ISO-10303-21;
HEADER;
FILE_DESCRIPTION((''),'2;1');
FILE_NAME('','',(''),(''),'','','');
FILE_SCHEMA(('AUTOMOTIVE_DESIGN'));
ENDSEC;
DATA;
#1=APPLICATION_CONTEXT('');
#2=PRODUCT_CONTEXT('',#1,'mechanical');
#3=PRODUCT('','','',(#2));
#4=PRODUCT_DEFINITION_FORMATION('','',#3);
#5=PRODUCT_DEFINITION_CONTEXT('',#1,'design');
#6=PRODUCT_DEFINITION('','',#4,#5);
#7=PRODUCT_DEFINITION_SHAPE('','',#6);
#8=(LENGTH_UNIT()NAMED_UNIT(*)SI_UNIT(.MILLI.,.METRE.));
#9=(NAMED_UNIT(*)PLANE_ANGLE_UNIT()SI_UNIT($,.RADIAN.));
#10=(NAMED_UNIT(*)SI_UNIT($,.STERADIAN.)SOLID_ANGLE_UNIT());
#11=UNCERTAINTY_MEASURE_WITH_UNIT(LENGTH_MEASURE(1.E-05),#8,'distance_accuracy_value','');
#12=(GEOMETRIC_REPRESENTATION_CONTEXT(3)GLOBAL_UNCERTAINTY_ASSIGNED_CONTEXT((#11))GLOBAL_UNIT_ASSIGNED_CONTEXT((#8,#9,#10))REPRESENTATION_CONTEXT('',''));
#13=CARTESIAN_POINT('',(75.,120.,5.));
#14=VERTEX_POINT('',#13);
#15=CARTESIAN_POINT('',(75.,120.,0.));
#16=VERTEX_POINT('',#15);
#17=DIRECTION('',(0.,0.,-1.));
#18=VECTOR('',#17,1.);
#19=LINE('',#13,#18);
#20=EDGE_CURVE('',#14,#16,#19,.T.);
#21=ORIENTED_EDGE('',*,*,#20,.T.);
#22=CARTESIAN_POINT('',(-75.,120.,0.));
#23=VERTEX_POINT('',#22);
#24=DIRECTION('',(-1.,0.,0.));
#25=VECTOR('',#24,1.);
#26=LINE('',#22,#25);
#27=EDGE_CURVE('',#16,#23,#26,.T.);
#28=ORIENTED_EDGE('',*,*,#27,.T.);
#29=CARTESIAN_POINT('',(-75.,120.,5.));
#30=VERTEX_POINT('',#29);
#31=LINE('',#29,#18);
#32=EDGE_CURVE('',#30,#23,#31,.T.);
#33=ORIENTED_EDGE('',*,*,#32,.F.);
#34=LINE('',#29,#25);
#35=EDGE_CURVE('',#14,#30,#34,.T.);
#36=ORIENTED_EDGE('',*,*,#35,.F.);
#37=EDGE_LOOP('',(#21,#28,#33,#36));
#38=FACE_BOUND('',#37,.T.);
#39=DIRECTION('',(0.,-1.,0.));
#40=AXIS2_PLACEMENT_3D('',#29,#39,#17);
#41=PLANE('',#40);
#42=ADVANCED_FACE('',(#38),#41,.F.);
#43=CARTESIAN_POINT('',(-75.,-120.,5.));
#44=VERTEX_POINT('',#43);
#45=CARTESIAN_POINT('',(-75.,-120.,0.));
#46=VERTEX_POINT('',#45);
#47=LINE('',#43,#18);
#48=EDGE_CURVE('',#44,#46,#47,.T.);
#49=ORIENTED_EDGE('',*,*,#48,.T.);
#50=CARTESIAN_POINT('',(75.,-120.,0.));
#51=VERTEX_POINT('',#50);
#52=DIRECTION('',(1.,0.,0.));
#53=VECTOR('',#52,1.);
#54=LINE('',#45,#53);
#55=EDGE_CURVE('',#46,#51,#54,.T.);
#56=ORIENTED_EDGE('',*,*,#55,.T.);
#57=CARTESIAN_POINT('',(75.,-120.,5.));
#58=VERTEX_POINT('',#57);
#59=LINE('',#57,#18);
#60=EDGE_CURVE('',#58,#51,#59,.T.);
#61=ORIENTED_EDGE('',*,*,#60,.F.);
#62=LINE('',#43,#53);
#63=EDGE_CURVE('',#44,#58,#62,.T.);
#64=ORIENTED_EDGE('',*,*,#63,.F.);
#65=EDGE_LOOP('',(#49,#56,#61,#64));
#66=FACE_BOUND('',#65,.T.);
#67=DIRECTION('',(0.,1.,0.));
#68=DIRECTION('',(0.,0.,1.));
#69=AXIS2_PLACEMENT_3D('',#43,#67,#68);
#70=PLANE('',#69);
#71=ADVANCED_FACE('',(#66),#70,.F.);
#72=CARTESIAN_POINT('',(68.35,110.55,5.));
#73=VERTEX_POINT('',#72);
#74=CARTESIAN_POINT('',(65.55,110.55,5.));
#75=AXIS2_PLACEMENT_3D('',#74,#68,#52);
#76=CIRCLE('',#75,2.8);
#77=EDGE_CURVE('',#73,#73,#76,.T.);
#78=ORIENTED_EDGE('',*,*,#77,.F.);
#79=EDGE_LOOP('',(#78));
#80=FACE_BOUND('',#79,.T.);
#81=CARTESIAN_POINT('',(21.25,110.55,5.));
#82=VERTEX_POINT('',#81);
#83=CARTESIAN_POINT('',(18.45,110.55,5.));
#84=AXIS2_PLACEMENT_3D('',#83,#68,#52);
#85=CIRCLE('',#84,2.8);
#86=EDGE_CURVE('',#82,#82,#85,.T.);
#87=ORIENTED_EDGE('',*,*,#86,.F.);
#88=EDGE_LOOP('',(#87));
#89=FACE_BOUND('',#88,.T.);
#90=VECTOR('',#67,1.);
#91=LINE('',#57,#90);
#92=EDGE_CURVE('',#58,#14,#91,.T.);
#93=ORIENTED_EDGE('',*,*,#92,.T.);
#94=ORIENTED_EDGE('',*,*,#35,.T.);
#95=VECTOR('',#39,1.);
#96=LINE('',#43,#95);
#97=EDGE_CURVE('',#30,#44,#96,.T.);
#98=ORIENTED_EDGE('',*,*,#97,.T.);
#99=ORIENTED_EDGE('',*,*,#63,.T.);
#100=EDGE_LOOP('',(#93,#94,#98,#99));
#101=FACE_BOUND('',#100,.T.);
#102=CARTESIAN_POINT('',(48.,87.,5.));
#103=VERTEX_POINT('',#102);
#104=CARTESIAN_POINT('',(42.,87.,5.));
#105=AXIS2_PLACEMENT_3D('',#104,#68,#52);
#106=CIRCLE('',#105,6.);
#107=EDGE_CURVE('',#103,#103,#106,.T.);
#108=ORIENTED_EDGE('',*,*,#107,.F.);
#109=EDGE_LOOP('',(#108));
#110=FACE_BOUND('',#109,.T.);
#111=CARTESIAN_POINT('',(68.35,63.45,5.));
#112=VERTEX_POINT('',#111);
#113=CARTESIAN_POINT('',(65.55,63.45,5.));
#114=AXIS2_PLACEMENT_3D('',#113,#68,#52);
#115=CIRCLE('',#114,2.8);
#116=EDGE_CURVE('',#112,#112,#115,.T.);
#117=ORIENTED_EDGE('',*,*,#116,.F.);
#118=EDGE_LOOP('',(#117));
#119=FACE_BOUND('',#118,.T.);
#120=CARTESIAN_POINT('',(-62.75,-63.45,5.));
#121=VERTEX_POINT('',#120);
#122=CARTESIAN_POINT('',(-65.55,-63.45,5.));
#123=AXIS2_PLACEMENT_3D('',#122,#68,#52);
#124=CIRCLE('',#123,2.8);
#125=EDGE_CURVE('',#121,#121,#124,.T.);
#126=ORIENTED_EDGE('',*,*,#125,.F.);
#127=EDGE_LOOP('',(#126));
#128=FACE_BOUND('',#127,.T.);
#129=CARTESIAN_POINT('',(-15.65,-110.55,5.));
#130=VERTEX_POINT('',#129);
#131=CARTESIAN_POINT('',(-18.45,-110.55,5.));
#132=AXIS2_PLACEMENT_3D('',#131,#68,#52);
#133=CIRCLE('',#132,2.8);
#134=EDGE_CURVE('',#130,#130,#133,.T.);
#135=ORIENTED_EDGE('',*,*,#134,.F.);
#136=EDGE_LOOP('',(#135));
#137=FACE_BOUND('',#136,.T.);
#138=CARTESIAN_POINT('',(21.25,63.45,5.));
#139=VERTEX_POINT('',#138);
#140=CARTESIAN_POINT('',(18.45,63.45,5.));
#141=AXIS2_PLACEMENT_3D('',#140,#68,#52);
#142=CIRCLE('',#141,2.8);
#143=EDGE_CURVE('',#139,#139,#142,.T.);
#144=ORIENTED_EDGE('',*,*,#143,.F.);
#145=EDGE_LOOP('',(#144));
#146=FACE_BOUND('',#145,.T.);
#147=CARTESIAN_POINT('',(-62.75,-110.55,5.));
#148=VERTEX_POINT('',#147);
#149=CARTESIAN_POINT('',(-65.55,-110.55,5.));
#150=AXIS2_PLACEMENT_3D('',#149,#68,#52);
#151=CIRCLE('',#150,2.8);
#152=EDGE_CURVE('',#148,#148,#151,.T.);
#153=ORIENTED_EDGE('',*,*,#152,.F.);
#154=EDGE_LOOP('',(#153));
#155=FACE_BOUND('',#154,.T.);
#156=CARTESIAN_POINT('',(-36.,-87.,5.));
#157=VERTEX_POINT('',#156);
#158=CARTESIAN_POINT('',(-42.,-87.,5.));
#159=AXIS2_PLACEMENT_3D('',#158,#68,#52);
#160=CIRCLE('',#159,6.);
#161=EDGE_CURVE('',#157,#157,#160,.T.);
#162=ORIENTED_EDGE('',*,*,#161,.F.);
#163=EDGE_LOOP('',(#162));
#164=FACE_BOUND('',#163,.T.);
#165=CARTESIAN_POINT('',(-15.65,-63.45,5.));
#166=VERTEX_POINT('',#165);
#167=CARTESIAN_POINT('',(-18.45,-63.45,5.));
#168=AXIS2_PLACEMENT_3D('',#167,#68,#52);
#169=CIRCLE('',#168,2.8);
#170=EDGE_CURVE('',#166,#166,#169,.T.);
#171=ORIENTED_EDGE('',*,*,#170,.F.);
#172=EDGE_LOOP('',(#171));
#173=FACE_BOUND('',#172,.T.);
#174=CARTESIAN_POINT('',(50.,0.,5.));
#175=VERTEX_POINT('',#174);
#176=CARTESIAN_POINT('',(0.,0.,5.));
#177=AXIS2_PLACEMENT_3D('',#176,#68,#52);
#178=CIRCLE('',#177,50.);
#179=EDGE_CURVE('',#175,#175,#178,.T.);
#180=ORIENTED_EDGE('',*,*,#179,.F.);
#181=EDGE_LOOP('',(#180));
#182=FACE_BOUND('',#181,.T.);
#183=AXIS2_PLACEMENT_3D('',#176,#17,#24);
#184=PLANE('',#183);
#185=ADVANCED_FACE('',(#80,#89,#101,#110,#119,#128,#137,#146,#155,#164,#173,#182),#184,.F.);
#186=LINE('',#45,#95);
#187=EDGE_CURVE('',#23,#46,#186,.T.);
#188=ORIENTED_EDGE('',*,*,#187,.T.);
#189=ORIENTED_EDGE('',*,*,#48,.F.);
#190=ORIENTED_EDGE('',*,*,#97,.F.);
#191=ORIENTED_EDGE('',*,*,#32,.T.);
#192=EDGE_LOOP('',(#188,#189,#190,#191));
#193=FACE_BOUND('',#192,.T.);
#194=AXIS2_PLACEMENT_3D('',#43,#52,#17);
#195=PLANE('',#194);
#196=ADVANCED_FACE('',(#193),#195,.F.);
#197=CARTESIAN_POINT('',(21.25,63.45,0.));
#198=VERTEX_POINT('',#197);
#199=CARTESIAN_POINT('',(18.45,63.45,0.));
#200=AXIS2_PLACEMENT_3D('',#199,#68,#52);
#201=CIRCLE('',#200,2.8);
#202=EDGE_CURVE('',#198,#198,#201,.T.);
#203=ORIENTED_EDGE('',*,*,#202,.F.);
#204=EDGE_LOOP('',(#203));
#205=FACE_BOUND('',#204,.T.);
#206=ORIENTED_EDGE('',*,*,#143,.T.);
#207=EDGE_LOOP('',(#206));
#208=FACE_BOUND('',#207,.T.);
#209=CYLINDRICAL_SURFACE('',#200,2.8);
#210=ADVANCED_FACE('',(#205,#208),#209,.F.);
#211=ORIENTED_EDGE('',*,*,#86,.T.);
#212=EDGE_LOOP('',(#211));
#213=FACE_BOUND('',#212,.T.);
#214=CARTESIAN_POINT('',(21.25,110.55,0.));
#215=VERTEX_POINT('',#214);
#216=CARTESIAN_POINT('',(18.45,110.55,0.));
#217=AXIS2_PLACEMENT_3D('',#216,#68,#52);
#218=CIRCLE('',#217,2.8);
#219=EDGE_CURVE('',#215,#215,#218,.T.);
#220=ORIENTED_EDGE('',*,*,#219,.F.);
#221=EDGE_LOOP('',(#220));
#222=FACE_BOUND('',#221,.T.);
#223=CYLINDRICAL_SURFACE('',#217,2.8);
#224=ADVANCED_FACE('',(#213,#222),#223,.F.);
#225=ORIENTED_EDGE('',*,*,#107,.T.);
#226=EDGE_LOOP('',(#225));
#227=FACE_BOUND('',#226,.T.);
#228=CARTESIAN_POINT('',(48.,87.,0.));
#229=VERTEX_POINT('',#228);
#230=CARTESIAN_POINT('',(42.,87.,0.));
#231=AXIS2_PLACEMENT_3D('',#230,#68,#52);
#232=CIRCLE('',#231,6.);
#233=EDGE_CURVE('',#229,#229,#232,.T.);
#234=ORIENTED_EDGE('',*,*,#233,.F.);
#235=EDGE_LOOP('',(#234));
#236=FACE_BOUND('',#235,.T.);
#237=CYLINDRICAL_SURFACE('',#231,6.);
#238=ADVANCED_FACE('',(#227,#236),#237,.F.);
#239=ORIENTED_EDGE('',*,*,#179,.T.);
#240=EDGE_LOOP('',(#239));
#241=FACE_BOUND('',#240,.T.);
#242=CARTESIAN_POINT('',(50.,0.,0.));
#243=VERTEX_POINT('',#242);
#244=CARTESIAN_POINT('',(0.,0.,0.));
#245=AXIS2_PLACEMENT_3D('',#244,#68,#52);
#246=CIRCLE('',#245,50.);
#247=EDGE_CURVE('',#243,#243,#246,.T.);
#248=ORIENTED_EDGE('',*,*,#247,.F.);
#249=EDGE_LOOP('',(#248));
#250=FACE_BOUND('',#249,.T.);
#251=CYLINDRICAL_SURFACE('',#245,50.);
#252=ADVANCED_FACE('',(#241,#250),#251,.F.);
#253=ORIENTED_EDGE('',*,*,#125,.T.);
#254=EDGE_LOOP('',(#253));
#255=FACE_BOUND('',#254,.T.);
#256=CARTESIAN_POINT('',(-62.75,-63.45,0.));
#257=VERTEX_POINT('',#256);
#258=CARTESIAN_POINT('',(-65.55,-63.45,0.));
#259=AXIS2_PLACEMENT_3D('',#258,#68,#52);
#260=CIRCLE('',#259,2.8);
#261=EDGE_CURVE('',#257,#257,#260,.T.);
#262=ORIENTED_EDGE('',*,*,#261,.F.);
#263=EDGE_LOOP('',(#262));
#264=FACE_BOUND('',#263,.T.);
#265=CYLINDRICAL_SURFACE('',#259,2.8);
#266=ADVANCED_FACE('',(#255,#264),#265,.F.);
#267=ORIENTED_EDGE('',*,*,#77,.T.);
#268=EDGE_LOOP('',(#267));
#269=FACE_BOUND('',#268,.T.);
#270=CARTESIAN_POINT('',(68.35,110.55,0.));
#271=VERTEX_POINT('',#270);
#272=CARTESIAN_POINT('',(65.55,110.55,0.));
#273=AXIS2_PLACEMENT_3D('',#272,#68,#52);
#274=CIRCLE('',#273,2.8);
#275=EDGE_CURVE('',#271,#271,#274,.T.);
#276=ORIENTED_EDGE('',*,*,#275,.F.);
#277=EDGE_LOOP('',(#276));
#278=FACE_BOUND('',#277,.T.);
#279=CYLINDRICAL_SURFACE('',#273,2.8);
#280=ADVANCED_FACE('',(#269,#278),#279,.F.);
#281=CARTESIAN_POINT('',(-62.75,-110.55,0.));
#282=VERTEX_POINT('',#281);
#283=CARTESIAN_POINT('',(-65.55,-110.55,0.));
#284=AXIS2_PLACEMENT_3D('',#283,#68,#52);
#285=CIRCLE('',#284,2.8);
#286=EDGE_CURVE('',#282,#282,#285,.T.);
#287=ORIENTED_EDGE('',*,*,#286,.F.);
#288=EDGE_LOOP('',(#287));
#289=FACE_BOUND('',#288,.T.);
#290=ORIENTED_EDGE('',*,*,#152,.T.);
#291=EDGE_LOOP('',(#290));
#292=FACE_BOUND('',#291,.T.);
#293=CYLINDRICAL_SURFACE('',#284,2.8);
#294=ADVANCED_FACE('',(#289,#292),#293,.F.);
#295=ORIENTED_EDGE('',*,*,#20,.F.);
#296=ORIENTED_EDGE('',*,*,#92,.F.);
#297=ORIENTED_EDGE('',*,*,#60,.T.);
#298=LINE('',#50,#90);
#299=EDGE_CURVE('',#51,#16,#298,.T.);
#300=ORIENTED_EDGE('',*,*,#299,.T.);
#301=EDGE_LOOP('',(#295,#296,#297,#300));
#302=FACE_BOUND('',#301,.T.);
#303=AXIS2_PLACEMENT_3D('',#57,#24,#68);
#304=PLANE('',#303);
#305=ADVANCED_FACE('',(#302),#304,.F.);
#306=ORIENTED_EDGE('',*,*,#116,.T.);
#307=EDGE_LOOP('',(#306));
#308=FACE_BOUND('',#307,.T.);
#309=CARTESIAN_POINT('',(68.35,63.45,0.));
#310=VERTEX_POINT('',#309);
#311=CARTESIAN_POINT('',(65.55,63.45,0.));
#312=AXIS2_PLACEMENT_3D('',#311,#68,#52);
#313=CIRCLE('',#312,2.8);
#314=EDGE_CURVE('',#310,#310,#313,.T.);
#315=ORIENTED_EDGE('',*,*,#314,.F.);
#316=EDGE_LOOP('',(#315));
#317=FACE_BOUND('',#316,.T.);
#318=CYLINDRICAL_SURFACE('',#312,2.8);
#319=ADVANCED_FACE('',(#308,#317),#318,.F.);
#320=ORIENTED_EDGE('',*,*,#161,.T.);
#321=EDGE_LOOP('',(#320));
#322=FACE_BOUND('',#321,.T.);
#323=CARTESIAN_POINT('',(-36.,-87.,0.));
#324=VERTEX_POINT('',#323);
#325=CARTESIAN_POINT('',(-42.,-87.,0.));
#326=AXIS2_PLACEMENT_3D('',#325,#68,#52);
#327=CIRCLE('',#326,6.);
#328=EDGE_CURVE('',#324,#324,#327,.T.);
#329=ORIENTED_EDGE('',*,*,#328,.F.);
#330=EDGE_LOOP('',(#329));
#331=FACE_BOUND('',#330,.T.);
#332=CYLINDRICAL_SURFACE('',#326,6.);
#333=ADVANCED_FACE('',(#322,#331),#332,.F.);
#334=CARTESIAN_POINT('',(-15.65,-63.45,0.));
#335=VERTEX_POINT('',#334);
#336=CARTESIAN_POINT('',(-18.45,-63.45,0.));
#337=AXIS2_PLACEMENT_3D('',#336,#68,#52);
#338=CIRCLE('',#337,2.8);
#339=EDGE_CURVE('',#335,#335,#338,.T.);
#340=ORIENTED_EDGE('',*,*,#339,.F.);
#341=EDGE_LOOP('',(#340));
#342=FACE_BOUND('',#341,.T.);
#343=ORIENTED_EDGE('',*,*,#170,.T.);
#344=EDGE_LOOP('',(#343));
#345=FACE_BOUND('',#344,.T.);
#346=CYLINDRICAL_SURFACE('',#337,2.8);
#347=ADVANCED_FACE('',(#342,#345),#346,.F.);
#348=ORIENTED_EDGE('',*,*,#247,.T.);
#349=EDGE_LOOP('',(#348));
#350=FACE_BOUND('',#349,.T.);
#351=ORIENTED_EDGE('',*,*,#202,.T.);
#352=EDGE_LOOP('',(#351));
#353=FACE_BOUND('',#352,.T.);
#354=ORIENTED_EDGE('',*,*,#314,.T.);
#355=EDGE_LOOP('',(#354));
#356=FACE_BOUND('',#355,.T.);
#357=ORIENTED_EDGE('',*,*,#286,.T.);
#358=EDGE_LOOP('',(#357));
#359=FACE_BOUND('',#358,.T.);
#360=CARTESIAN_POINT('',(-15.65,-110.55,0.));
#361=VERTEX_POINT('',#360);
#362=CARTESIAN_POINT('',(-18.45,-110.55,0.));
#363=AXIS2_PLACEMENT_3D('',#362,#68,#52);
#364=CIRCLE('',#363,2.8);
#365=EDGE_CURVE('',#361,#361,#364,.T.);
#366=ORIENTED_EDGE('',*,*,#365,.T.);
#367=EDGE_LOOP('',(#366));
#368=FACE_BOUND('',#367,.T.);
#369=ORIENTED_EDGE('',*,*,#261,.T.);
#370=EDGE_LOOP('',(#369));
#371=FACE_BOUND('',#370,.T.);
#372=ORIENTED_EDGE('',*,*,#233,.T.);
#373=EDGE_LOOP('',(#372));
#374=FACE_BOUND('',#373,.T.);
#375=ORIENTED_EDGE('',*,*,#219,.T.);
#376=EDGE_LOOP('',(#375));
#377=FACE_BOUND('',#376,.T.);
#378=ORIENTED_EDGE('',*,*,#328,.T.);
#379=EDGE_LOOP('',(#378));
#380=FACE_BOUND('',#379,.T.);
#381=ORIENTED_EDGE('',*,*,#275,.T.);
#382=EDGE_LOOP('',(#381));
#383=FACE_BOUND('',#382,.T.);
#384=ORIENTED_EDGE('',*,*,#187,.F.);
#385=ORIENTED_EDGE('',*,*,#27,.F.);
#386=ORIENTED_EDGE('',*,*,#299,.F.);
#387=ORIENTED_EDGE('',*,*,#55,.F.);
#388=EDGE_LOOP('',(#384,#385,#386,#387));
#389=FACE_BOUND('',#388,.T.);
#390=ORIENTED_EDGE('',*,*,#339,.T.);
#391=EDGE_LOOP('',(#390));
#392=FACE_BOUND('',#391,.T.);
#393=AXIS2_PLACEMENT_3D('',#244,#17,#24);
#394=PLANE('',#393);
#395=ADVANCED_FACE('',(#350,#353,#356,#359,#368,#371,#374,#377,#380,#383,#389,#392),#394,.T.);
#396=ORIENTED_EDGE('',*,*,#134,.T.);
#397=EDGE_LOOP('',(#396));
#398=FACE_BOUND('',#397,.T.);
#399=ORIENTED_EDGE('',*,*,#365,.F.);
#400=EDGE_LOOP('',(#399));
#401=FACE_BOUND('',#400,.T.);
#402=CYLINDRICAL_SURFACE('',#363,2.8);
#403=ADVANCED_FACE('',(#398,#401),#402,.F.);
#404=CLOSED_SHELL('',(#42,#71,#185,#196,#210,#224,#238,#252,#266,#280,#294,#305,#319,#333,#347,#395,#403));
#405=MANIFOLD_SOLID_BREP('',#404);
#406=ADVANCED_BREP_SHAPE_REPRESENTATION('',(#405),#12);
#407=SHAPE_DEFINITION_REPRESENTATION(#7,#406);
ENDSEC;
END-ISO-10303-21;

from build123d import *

# Parameters (mm, degrees)
SKETCH1_W               = 150
SKETCH1_H               = 240
BOSS_EXTRUDE1_DEPTH     = 5
SKETCH7_R               = 2.8
SKETCH7_R_2             = 6
CUT_EXTRUDE4_DEPTH      = 142.598022585
SKETCH8_R               = 50
CUT_EXTRUDE5_DEPTH      = 142.598022585
DELETEFACE1_OUTLINE_R   = 6
DELETEFACE1_OUTLINE_R_2 = 2.8
DELETEFACE1_DEPTH       = 5


# Read off the part's stored shape, not the designer's step: DeleteFace1
with BuildPart() as part:
    # Sketch1 → Boss-Extrude1 (new body)
    with BuildSketch(Plane.XY):
        Rectangle(SKETCH1_W, SKETCH1_H)
    extrude(amount=BOSS_EXTRUDE1_DEPTH)

    # Sketch7 → Cut-Extrude4 (cut, through all)
    with BuildSketch(Plane.XY.offset(5)):
        with Locations((-65.55, -110.55)):
            Circle(SKETCH7_R)
        with Locations((-65.55, -63.45)):
            Circle(SKETCH7_R)
        with Locations((-18.45, -63.45)):
            Circle(SKETCH7_R)
        with Locations((-18.45, -110.55)):
            Circle(SKETCH7_R)
        with Locations(Location((-18.45, 110.55, 0), (0, 0, 180))):
            Circle(SKETCH7_R)
        with Locations(Location((-18.45, 63.45, 0), (0, 0, 180))):
            Circle(SKETCH7_R)
        with Locations(Location((-65.55, 63.45, 0), (0, 0, 180))):
            Circle(SKETCH7_R)
        with Locations(Location((-65.55, 110.55, 0), (0, 0, 180))):
            Circle(SKETCH7_R)
        with Locations((65.55, 110.55)):
            Circle(SKETCH7_R)
        with Locations((65.55, 63.45)):
            Circle(SKETCH7_R)
        with Locations((18.45, 63.45)):
            Circle(SKETCH7_R)
        with Locations((18.45, 110.55)):
            Circle(SKETCH7_R)
        with Locations(Location((18.45, -110.55, 0), (0, 0, 180))):
            Circle(SKETCH7_R)
        with Locations(Location((18.45, -63.45, 0), (0, 0, 180))):
            Circle(SKETCH7_R)
        with Locations(Location((65.55, -63.45, 0), (0, 0, 180))):
            Circle(SKETCH7_R)
        with Locations(Location((65.55, -110.55, 0), (0, 0, 180))):
            Circle(SKETCH7_R)
        with Locations((-42, -87)):
            Circle(SKETCH7_R_2)
        with Locations(Location((-42, 87, 0), (0, 0, 180))):
            Circle(SKETCH7_R_2)
        with Locations((42, 87)):
            Circle(SKETCH7_R_2)
        with Locations(Location((42, -87, 0), (0, 0, 180))):
            Circle(SKETCH7_R_2)
    extrude(amount=-CUT_EXTRUDE4_DEPTH, mode=Mode.SUBTRACT)

    # Sketch8 → Cut-Extrude5 (cut, through all)
    with BuildSketch(Plane.XY.offset(5)):
        Circle(SKETCH8_R)
    extrude(amount=-CUT_EXTRUDE5_DEPTH, mode=Mode.SUBTRACT)

    # DeleteFace1 outline → DeleteFace1 (add)
    with BuildSketch(Plane.XY):
        with Locations((42, -87)):
            Circle(DELETEFACE1_OUTLINE_R)
        with Locations((-42, 87)):
            Circle(DELETEFACE1_OUTLINE_R)
        with Locations((-65.55, 110.55)):
            Circle(DELETEFACE1_OUTLINE_R_2)
        with Locations((-65.55, 63.45)):
            Circle(DELETEFACE1_OUTLINE_R_2)
        with Locations((-18.45, 63.45)):
            Circle(DELETEFACE1_OUTLINE_R_2)
        with Locations((-18.45, 110.55)):
            Circle(DELETEFACE1_OUTLINE_R_2)
        with Locations((65.55, -110.55)):
            Circle(DELETEFACE1_OUTLINE_R_2)
        with Locations((65.55, -63.45)):
            Circle(DELETEFACE1_OUTLINE_R_2)
        with Locations((18.45, -63.45)):
            Circle(DELETEFACE1_OUTLINE_R_2)
        with Locations((18.45, -110.55)):
            Circle(DELETEFACE1_OUTLINE_R_2)
    extrude(amount=DELETEFACE1_DEPTH)


solid = part.part
